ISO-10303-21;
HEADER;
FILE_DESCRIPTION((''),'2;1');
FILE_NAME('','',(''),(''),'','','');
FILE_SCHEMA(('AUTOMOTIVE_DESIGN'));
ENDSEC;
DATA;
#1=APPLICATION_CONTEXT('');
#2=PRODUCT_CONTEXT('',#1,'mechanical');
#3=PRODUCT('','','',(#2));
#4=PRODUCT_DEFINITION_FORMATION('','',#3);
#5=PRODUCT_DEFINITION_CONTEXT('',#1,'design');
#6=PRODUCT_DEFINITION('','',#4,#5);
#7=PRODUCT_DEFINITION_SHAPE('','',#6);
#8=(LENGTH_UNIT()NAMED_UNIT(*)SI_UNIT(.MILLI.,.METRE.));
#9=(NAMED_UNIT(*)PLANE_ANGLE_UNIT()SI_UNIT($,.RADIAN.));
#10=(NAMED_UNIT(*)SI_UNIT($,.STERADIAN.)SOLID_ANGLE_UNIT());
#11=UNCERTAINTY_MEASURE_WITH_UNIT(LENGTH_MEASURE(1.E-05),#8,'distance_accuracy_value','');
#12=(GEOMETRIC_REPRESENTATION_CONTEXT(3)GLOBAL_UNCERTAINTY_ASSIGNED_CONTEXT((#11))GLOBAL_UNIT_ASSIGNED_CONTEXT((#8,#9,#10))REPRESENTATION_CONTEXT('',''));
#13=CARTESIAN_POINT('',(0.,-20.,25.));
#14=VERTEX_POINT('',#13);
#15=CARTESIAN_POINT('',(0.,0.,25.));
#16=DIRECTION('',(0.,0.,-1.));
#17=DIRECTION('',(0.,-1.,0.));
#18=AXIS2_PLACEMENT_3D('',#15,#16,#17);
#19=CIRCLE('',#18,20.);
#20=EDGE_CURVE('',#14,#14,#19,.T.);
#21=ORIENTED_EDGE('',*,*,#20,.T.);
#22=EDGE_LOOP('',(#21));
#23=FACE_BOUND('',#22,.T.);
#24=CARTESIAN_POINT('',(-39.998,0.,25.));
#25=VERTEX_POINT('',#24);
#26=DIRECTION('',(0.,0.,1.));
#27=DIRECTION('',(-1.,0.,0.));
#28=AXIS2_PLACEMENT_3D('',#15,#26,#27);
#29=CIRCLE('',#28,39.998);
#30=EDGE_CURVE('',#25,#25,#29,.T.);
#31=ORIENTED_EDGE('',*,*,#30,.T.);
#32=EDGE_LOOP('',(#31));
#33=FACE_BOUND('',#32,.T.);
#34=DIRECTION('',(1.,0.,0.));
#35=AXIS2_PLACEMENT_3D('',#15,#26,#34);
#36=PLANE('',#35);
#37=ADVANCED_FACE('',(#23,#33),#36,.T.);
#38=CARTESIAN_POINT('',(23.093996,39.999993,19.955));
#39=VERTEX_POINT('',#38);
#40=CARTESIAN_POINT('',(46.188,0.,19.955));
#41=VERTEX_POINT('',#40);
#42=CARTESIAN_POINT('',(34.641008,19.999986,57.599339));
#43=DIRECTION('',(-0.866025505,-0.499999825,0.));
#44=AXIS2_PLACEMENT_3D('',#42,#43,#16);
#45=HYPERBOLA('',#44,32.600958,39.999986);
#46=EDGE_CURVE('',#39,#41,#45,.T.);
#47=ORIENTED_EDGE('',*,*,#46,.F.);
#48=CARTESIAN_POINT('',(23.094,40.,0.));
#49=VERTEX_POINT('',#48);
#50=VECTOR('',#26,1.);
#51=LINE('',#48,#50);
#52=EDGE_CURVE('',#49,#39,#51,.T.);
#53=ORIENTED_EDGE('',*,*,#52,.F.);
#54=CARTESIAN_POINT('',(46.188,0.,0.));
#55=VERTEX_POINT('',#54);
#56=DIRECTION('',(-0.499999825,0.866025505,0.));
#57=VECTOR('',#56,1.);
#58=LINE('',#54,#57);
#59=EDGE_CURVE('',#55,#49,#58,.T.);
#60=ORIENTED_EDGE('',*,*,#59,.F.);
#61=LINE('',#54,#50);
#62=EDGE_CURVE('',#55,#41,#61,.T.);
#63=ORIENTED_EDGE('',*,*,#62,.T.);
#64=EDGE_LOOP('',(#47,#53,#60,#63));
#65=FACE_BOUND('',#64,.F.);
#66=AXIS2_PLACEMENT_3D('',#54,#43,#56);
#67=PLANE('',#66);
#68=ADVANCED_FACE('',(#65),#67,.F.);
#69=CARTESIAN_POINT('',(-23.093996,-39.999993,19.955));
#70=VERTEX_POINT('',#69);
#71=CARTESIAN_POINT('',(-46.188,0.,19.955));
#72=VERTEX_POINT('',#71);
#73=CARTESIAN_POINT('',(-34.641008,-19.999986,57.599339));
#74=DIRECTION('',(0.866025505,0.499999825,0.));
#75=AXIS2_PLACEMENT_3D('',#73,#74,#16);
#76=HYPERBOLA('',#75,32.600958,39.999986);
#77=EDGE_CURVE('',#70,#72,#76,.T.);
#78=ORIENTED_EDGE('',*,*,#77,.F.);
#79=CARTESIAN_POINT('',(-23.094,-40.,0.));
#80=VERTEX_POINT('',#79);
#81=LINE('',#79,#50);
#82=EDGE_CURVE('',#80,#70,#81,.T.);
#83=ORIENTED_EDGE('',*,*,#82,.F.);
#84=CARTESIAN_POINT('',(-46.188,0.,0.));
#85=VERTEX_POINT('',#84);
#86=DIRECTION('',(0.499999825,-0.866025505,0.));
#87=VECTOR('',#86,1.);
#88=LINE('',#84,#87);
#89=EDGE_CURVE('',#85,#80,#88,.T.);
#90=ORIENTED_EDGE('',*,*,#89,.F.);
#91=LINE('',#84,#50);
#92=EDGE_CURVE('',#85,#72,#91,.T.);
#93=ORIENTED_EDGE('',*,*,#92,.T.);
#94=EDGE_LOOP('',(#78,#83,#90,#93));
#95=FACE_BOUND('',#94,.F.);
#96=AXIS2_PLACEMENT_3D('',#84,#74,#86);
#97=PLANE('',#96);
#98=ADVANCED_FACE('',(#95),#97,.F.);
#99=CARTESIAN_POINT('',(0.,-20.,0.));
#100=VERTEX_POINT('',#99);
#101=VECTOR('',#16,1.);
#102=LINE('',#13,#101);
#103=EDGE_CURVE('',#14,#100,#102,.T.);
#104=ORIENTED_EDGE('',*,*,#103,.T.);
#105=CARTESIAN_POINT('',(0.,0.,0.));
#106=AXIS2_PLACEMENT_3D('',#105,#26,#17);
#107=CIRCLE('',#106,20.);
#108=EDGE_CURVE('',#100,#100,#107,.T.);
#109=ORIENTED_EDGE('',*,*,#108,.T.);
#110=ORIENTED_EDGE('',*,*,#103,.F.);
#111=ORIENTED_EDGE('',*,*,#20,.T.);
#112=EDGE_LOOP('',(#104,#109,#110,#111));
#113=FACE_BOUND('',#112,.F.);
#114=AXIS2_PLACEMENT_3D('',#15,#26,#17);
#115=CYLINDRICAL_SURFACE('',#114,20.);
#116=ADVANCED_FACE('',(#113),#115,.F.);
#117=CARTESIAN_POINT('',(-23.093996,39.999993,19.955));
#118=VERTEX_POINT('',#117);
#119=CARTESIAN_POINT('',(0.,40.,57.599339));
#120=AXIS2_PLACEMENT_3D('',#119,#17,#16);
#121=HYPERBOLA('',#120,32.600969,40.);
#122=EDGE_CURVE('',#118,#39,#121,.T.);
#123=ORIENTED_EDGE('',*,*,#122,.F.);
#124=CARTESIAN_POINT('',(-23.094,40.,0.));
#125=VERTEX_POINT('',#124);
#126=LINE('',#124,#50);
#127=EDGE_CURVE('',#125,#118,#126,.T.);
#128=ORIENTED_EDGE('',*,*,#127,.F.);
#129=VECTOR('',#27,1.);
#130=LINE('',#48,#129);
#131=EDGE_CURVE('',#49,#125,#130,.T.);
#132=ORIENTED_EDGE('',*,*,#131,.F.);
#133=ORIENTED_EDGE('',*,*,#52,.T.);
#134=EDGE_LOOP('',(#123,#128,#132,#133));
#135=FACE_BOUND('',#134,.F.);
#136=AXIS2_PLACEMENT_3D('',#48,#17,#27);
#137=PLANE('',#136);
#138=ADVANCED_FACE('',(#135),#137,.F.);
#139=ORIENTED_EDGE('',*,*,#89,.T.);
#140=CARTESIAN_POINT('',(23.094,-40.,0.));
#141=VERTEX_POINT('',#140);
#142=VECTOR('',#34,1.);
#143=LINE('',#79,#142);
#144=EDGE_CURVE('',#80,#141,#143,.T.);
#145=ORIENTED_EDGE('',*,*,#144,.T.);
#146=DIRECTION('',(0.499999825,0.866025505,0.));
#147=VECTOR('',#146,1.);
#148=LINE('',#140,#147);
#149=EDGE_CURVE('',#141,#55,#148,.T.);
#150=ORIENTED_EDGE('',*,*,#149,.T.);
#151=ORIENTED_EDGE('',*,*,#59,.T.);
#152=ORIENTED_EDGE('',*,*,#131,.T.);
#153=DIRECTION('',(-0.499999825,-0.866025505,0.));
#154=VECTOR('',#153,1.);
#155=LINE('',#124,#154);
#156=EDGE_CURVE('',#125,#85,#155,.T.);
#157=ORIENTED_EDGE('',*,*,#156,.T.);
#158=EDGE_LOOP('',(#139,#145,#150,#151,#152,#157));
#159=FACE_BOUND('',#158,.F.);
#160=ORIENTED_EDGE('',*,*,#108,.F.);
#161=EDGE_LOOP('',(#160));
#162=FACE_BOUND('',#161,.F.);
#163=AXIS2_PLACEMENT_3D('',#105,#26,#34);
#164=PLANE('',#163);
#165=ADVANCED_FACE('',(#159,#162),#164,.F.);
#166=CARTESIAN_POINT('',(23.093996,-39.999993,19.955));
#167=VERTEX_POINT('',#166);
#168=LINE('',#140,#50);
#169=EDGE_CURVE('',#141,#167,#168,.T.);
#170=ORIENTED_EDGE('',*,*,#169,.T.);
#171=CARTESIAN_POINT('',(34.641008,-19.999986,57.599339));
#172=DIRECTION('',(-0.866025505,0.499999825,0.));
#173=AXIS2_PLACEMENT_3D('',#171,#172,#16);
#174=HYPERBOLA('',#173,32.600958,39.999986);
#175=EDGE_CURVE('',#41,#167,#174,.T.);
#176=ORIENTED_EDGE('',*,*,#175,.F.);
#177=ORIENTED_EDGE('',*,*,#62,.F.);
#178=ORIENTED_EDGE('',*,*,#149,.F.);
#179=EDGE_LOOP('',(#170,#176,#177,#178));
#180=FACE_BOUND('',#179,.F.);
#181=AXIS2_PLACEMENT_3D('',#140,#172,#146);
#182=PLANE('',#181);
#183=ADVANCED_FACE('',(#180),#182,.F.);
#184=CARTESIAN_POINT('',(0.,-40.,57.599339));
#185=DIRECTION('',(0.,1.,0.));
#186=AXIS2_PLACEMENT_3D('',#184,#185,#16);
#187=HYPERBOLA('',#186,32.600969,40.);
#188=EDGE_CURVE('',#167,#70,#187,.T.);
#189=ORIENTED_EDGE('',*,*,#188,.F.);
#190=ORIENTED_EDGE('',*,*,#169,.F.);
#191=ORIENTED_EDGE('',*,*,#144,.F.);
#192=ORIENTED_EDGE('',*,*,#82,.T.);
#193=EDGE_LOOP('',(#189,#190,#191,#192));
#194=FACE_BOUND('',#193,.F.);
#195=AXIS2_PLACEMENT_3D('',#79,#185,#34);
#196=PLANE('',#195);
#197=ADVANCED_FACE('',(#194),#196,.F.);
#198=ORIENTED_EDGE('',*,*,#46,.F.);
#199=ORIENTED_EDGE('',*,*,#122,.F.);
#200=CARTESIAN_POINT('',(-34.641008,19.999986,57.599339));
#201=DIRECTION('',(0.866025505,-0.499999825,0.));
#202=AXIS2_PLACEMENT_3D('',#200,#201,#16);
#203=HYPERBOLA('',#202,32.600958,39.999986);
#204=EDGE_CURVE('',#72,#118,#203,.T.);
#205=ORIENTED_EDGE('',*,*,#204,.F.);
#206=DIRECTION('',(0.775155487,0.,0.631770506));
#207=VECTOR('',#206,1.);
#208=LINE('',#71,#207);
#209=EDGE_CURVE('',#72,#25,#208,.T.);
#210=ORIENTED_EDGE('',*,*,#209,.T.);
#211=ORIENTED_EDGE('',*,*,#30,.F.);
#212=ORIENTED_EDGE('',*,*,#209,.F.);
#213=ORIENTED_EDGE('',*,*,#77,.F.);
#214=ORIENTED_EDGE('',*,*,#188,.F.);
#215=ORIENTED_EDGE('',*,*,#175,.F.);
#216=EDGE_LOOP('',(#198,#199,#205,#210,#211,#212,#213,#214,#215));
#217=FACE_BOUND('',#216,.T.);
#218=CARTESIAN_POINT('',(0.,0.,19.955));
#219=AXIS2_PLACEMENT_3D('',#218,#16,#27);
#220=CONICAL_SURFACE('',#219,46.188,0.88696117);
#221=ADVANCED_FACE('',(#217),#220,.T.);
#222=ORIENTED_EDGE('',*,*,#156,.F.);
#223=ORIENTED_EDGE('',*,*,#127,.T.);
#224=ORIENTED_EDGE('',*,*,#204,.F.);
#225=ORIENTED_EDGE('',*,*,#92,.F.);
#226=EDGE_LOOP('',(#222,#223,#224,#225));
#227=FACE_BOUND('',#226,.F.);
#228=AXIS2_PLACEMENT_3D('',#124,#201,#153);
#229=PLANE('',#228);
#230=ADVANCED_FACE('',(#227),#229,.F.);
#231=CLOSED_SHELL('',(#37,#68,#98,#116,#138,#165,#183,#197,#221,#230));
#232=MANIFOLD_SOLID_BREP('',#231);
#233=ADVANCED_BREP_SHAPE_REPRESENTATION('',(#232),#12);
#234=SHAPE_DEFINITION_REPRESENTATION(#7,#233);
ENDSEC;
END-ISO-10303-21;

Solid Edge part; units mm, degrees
sketch "Sketch1" plane through (0, 0, 0) normal (0, 0, 1) x (1, 0, 0)
  line L0 (-23.094, 40) -> (-46.188, 0)
  line L1 (-46.188, 0) -> (-23.094, -40)
  line L2 (-23.094, -40) -> (23.094, -40)
  line L3 (23.094, -40) -> (46.188, 0)
  line L4 (46.188, 0) -> (23.094, 40)
  line L5 (23.094, 40) -> (-23.094, 40)
extrude "Protrusion1" add sketch "Sketch1" along normal blind 25
hole "Hole_5" at (0, 0, 25) direction (0, 0, -1) diameter 40 end up to next
sketch "Sketch2" plane through (0, 0, 0) normal (0, -1, 0) x (1, 0, 0)
  line L0 (-39.998, 25) -> (-46.188, 25)
  line L1 (-46.188, 25) -> (-46.188, 19.955)
  line L2 (-46.188, 19.955) -> (-39.998, 25)
revolve "RevolvedCutout1" cut sketch "Sketch2" angle 360 about axis through (0, 0, 0) along (0, 0, 1)
